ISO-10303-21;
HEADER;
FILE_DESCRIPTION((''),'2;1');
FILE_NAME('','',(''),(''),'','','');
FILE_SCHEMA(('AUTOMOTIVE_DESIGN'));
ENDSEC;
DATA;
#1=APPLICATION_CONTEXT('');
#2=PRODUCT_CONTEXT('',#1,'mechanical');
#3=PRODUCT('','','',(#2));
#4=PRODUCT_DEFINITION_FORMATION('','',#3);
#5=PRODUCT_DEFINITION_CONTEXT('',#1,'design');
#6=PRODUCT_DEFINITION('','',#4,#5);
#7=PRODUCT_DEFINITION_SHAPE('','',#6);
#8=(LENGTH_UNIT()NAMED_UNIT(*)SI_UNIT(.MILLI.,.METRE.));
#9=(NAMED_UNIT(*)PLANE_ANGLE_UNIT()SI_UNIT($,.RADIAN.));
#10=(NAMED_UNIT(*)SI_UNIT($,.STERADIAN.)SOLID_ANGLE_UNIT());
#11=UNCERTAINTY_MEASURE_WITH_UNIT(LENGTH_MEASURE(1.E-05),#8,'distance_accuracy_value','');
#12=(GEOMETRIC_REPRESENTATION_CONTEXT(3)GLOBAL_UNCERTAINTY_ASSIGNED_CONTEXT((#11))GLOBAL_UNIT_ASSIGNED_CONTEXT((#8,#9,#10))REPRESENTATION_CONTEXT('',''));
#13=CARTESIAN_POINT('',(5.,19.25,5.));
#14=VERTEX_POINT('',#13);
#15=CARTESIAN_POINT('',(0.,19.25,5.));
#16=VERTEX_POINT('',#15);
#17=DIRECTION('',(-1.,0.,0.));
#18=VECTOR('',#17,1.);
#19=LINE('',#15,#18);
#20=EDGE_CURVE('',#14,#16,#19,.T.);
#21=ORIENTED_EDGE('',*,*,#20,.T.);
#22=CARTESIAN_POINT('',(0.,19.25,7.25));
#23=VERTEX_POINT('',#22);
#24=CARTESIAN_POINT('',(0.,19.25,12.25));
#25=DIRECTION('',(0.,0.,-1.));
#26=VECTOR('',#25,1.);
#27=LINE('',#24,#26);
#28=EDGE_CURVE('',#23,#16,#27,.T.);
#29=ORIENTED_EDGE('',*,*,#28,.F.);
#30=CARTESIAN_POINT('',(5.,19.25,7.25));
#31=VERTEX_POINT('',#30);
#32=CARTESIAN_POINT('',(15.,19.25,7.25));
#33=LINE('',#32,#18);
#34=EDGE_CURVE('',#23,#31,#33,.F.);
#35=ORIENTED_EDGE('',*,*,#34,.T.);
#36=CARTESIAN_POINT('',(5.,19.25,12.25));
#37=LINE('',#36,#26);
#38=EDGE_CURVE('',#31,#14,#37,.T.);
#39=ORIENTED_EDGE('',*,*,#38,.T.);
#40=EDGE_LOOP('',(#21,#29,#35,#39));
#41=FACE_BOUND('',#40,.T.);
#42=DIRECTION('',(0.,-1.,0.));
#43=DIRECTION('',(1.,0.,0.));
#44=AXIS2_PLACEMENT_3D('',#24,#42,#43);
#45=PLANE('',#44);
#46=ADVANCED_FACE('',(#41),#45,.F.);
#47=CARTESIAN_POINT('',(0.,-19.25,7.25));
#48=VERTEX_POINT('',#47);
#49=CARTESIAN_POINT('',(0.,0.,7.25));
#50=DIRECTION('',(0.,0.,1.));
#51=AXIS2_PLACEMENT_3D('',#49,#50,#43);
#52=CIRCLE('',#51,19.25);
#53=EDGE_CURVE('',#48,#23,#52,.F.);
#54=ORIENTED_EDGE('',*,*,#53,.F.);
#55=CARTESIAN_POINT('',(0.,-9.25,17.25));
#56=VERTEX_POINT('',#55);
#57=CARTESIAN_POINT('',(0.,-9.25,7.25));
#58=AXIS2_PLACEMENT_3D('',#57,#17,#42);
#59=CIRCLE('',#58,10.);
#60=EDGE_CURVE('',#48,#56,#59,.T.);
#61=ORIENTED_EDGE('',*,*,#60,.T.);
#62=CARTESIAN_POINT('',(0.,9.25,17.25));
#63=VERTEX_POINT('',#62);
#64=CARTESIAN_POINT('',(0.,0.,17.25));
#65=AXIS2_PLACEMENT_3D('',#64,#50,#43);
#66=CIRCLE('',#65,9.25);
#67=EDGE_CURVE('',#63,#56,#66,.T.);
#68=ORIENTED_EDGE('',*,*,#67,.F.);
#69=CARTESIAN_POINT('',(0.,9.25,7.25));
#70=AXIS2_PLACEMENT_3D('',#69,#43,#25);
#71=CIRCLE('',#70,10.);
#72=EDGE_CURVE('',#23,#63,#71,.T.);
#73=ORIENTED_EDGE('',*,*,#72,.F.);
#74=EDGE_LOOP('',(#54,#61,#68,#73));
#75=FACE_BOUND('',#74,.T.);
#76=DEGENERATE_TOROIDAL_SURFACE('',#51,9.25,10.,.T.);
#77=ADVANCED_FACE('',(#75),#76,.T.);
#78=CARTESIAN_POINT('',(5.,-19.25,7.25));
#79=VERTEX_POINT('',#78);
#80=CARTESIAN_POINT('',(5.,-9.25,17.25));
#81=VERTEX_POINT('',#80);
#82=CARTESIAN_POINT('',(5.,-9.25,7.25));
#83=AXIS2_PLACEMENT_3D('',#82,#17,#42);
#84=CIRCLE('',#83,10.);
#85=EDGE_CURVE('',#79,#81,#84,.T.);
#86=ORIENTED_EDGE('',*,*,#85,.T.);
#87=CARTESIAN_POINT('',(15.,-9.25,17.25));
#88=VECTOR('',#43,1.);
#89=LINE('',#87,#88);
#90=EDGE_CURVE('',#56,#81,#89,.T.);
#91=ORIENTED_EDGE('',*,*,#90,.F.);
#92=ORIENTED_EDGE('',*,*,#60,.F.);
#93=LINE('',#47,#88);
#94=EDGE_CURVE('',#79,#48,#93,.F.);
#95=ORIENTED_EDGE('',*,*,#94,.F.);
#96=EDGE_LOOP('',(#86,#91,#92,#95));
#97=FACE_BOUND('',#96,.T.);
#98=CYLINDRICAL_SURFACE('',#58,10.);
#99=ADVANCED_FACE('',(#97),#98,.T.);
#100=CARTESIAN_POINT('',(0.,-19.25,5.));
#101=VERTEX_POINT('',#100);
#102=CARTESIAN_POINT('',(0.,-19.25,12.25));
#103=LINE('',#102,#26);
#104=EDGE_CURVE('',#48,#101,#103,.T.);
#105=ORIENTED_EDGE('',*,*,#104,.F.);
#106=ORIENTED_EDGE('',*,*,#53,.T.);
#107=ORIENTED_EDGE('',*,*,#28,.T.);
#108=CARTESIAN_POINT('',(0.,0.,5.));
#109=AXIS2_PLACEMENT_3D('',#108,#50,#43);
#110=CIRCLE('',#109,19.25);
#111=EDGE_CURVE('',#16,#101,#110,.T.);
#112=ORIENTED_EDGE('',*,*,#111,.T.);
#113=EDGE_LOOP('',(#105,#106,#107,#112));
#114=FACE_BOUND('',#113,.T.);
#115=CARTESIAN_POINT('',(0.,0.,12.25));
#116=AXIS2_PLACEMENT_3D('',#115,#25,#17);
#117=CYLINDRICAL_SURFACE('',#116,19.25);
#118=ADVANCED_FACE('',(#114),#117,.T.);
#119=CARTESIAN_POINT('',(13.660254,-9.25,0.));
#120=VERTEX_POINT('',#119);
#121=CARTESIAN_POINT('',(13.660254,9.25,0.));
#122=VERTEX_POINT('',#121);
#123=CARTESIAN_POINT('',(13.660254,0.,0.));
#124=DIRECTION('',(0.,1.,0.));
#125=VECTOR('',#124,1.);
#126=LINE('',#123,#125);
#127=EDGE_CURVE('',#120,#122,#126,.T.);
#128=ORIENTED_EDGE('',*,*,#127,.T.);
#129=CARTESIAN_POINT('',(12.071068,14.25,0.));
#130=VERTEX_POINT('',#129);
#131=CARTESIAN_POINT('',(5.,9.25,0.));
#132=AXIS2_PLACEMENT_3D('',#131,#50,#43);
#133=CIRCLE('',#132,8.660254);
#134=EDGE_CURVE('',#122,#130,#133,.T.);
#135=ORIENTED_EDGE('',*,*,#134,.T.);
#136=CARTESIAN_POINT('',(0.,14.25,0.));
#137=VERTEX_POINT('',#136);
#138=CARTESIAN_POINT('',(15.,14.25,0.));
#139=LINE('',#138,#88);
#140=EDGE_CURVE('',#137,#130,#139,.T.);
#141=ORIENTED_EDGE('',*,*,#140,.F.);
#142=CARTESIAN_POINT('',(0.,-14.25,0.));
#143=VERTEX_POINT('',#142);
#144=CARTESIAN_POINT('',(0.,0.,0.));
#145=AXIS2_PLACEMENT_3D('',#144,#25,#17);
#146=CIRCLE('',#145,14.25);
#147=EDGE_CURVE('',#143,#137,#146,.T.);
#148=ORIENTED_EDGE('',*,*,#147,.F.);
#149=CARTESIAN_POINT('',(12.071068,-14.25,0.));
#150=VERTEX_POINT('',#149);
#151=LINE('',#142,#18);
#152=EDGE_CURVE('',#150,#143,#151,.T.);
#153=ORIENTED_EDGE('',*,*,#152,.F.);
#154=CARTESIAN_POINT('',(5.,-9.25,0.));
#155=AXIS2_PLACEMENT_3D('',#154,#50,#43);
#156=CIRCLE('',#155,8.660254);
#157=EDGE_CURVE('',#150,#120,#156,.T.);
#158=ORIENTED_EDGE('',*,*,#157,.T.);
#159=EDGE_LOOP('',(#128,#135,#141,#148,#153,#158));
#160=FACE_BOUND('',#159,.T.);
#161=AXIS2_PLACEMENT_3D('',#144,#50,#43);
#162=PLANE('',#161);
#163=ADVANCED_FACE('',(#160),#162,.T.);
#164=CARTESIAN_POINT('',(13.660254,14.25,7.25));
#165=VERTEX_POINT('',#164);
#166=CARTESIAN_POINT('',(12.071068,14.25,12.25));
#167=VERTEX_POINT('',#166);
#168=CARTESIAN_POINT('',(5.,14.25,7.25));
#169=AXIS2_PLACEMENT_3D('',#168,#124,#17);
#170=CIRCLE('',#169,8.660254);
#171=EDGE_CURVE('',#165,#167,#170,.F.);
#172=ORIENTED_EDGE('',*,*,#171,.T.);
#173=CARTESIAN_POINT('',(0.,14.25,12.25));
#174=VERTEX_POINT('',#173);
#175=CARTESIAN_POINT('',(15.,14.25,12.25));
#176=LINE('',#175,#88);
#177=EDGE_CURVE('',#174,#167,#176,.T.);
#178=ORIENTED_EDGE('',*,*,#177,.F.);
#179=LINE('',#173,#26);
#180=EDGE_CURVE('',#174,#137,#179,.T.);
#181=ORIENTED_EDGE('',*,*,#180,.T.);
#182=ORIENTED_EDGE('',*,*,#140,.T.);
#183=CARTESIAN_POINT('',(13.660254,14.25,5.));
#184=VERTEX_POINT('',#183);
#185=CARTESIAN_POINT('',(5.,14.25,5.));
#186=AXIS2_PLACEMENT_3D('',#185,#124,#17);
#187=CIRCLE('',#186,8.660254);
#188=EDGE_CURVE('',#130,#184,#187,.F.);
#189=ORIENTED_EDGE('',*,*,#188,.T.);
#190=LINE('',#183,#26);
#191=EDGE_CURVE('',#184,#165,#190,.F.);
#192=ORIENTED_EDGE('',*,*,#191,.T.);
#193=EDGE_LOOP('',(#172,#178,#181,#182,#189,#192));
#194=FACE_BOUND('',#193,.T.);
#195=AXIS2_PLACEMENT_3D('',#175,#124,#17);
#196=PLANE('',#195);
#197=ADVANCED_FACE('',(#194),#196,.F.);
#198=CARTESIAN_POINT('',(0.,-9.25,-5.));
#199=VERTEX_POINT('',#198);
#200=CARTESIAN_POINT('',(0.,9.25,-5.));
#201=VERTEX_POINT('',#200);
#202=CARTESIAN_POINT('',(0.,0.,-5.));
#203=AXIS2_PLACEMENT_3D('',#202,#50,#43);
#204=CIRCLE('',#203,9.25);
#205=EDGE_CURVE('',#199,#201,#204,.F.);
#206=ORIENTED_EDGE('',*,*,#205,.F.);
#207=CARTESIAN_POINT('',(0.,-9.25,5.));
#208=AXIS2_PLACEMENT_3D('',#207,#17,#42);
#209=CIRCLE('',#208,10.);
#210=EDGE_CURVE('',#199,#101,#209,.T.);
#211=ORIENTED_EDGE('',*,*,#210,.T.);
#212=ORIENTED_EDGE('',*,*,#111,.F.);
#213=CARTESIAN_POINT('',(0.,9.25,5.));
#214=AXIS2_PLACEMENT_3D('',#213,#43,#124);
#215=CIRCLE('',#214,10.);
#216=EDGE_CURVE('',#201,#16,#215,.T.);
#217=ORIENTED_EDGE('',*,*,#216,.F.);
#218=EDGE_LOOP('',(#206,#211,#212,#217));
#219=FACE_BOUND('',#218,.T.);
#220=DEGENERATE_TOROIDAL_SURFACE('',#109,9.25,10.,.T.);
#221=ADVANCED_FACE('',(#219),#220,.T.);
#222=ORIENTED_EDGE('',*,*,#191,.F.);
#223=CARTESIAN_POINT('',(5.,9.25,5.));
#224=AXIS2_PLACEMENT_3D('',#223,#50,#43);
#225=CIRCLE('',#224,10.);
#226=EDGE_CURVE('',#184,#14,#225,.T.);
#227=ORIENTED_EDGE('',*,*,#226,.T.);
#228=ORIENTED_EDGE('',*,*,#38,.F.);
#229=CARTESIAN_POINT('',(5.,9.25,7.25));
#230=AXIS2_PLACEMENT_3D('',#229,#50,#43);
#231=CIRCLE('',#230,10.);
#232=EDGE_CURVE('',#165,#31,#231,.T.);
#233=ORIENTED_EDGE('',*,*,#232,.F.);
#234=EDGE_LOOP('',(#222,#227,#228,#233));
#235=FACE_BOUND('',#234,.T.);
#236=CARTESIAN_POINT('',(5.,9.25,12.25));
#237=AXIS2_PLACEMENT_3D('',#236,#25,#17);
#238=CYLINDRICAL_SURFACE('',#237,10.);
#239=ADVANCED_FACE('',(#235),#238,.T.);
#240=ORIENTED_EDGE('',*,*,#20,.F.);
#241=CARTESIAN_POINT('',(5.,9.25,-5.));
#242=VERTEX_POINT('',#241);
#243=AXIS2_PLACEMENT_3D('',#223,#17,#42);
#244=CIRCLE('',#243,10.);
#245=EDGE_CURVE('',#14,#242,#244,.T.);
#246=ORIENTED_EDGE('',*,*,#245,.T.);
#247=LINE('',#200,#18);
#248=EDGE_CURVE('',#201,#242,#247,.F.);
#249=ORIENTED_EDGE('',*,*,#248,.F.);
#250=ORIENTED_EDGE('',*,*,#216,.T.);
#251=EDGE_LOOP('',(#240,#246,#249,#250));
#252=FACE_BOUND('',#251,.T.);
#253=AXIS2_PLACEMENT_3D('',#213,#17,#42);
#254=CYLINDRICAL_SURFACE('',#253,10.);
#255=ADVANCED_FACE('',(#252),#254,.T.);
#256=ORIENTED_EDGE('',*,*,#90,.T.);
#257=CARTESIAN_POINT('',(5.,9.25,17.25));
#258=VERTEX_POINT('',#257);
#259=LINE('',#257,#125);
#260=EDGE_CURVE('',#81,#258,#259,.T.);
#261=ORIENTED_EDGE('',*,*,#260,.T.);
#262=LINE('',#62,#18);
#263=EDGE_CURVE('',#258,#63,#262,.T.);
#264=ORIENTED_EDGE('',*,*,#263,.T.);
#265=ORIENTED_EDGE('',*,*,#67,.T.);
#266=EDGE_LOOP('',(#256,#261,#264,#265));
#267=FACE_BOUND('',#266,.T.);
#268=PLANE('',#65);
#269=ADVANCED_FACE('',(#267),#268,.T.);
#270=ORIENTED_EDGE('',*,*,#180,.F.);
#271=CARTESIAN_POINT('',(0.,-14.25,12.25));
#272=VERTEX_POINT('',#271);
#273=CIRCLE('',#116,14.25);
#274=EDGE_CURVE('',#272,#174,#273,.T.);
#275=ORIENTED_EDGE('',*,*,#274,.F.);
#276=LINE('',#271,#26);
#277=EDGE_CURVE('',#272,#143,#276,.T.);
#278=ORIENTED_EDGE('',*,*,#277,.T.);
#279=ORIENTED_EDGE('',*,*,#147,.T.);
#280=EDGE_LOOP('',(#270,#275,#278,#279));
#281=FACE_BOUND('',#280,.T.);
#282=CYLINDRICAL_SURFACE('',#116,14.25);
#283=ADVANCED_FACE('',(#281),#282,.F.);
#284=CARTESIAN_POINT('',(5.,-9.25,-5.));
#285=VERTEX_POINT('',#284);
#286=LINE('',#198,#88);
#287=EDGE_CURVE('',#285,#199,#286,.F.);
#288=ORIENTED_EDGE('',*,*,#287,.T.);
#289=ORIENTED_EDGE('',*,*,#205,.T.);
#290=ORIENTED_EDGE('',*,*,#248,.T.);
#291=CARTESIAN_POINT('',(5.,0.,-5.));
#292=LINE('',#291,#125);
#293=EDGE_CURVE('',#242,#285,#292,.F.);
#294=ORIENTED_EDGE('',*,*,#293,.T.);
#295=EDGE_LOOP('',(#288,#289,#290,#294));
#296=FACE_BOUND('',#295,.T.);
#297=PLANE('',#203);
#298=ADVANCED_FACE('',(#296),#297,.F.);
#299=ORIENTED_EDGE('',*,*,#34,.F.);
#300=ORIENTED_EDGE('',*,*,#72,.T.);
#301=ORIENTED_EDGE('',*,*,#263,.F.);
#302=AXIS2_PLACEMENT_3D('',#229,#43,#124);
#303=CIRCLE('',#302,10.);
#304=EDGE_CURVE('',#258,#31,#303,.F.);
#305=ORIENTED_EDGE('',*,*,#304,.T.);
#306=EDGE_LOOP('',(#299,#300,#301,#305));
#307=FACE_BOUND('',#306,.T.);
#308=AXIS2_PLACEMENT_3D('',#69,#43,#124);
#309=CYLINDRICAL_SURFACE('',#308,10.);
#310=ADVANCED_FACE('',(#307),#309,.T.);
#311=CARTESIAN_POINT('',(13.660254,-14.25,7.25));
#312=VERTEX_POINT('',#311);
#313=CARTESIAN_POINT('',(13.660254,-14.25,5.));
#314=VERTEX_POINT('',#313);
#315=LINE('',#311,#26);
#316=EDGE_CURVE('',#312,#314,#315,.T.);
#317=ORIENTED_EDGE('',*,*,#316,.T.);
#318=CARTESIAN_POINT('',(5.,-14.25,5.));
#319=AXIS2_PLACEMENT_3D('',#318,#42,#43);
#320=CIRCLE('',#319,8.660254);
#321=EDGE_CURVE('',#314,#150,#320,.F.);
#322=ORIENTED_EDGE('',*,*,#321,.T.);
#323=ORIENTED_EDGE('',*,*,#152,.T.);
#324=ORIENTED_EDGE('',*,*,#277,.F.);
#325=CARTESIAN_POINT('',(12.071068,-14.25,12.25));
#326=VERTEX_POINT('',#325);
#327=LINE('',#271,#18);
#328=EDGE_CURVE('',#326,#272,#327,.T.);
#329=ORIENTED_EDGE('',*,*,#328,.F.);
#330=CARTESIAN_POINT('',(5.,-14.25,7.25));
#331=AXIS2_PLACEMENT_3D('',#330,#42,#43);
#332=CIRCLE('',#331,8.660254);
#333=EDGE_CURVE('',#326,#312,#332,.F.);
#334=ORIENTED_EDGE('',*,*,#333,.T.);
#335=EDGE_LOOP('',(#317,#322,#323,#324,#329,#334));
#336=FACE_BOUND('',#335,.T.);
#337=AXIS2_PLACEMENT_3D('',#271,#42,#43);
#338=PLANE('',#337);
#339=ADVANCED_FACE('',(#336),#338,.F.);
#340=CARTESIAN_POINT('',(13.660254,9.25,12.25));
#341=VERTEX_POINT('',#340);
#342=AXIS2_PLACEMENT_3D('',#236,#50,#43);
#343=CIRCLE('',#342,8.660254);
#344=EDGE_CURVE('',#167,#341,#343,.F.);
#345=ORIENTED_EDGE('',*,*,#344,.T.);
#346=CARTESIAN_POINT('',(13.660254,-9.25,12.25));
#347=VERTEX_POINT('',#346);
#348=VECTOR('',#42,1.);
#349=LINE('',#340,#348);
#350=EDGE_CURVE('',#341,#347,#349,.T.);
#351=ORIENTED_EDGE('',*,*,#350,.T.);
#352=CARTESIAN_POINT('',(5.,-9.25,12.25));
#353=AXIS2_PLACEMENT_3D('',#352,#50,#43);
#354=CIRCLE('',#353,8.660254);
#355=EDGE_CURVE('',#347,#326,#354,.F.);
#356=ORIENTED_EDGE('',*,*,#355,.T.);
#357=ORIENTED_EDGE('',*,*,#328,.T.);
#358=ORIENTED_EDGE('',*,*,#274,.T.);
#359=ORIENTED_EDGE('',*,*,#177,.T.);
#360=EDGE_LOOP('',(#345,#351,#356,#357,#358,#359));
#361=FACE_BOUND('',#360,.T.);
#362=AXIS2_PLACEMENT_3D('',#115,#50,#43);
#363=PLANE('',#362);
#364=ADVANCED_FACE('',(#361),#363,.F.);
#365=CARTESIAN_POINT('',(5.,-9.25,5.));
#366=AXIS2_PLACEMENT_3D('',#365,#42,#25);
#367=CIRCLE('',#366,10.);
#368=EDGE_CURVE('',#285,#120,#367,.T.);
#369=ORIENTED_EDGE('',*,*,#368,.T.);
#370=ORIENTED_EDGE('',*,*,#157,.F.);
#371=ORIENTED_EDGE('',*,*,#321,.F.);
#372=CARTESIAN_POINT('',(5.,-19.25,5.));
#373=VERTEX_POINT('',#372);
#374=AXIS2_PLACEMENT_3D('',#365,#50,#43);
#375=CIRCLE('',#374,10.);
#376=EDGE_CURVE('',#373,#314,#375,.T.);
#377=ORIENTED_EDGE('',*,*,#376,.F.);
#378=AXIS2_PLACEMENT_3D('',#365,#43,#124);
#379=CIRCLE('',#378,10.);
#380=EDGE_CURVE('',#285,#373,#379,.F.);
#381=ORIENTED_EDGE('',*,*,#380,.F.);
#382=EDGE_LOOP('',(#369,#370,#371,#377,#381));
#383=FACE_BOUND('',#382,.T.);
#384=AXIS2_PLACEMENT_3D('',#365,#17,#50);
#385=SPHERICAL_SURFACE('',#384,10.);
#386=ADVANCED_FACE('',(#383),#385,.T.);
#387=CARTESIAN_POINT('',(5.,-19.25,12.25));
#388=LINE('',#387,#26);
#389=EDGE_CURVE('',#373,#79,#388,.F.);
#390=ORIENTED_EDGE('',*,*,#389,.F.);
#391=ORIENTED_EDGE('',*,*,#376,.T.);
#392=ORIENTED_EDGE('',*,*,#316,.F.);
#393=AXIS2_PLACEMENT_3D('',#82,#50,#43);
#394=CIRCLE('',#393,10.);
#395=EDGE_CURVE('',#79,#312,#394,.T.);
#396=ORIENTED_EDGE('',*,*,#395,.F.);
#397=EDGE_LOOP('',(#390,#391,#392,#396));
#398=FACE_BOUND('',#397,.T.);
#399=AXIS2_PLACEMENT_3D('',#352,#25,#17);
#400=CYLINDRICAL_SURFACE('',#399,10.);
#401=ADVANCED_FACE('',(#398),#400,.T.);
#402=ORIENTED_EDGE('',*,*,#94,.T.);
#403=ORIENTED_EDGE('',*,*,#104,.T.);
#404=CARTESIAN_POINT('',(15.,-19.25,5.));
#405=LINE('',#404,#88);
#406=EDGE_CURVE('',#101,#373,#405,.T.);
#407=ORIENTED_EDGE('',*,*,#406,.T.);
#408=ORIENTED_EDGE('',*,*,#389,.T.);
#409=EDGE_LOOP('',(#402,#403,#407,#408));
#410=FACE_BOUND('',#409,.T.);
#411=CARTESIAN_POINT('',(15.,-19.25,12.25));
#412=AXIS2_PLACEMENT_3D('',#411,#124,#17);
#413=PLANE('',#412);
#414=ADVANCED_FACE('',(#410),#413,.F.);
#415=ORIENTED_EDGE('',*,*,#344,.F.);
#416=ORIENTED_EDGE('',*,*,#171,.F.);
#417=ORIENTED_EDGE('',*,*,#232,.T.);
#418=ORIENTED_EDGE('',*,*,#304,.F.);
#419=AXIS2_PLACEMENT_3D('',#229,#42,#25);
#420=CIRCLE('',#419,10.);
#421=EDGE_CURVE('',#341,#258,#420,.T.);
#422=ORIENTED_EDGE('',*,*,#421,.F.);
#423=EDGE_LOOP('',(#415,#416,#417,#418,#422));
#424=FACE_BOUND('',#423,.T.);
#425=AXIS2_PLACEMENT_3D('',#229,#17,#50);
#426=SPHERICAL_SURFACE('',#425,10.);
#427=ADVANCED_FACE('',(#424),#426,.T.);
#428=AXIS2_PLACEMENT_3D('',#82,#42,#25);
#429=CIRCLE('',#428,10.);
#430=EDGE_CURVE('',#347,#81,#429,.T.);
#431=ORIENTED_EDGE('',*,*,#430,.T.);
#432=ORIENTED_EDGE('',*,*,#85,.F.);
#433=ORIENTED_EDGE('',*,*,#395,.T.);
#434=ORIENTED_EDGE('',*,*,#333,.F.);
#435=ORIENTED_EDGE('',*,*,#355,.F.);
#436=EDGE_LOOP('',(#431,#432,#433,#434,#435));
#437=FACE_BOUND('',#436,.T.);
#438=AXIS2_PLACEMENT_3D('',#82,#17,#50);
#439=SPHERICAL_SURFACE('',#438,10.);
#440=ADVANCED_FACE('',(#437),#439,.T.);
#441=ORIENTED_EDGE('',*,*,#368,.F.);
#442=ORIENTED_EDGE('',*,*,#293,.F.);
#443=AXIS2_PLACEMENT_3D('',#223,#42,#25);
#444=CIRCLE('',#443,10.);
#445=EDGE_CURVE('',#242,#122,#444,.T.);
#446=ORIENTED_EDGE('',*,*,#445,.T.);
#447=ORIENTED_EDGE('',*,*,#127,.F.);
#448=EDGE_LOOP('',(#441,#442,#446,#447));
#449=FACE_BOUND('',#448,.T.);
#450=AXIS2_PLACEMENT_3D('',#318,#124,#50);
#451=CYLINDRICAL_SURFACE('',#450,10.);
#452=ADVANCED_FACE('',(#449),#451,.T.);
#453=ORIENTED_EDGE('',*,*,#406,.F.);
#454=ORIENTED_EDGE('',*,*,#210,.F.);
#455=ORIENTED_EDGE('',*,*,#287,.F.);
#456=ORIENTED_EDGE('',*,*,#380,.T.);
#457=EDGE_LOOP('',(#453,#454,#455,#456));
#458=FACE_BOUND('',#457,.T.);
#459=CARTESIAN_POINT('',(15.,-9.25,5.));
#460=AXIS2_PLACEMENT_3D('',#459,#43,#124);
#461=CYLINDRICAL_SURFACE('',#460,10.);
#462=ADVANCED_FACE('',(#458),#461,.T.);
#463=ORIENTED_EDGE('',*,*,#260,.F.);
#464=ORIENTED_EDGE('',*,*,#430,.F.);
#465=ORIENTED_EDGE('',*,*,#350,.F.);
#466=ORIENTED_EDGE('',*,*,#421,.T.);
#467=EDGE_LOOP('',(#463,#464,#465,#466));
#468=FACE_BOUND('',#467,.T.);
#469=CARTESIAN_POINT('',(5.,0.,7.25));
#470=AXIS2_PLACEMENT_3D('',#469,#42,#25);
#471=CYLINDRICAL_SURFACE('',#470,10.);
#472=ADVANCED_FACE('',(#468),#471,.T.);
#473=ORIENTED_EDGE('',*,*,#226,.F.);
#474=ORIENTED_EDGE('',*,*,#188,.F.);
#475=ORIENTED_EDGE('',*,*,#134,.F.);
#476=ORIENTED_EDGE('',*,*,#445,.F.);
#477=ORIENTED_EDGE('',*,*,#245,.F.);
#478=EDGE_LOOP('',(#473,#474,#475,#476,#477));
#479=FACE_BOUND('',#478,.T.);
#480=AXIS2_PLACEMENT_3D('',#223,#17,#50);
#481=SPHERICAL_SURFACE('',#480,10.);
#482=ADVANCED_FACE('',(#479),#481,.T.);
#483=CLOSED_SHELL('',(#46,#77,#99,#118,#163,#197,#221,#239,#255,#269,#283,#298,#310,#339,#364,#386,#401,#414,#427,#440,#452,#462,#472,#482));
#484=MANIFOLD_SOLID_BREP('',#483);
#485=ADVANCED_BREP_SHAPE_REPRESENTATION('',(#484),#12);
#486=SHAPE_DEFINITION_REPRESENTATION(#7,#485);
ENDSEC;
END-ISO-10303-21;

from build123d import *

# Parameters (mm, degrees)
BOSS_EXTRUDE1_DEPTH = 12.25
BOSS_EXTRUDE2_DEPTH = 5
LPATTERN1_COUNT     = 2
LPATTERN1_PITCH     = 17.25
FILLET11_R          = 10
FILLET12_R          = 10


with BuildPart() as part:
    # Sketch1 → Boss-Extrude1 (new body)
    with BuildSketch(Plane.XY):
        with BuildLine():
            Line((0, 19.25), (15, 19.25))
            Line((15, 19.25), (15, 14.25))
            Line((15, 14.25), (0, 14.25))
            ThreePointArc((0, 14.25), (-14.25, 0), (0, -14.25))
            Line((0, -14.25), (15, -14.25))
            Line((15, -14.25), (15, -19.25))
            Line((15, -19.25), (0, -19.25))
            ThreePointArc((0, -19.25), (-19.25, 0), (0, 19.25))
        make_face()
    extrude(amount=BOSS_EXTRUDE1_DEPTH)

    # Sketch2 → Boss-Extrude2 (add)
    with BuildSketch(Plane.XY.offset(12.25)):
        with BuildLine():
            Line((0, 19.25), (15, 19.25))
            Line((15, 19.25), (15, 14.25))
            Line((15, 14.25), (15, -14.25))
            Line((15, -14.25), (15, -19.25))
            Line((15, -19.25), (0, -19.25))
            ThreePointArc((0, -19.25), (-19.25, 0), (0, 19.25))
        make_face()
    boss_extrude2 = extrude(amount=BOSS_EXTRUDE2_DEPTH)

    # LPattern1: Boss-Extrude2 ×2
    with Locations(*[(0, 0, -i * LPATTERN1_PITCH) for i in range(1, LPATTERN1_COUNT)]):
        add(boss_extrude2)

    # Fillet11
    fillet11_edges = [part.edges().sort_by_distance(p)[0] for p in [
        (-19.25, 0, 17.25),
        (7.5, -19.25, 17.25),
        (7.5, 19.25, 17.25),
        (-19.25, 0, -5),
        (7.5, -19.25, -5),
        (7.5, 19.25, -5),
    ]]
    fillet(fillet11_edges, radius=FILLET11_R)

    # Fillet12
    # the kernel refuses this fillet: 10 mm, written as the material it takes off along each edge
    with BuildSketch(Plane(origin=(15, -9.25, 7.25), x_dir=(0, -1, 0), z_dir=(0, 0, -1))) as fillet12_piece_1:
        with BuildLine():
            CenterArc((10 - FILLET12_R, FILLET12_R), FILLET12_R, 270, 90)
            Line((10, FILLET12_R), (10, 0))
            Line((10, 0), (10 - FILLET12_R, 0))
        make_face()
    revolve(axis=Axis((15, -9.25, 7.25), (-1, 0, 0)), revolution_arc=90, mode=Mode.SUBTRACT)
    with BuildSketch(Plane(origin=(15, 9.25, 17.25), x_dir=(0, 0, -1), z_dir=(0, -1, 0)), Plane(origin=(15, -9.25, -5), x_dir=(0, 0, 1), z_dir=(0, 1, 0))) as fillet12_piece_2:
        with BuildLine():
            CenterArc((FILLET12_R, -FILLET12_R), FILLET12_R, 90, 90)
            Line((0, -FILLET12_R), (0, 0))
            Line((0, 0), (FILLET12_R, 0))
        make_face()
    extrude(amount=18.5, mode=Mode.SUBTRACT)
    with BuildSketch(Plane(origin=(15, 9.25, 7.25), x_dir=(0, 1, 0), z_dir=(0, 0, -1))) as fillet12_piece_3:
        with BuildLine():
            CenterArc((10 - FILLET12_R, -FILLET12_R), FILLET12_R, 360, 90)
            Line((10, -FILLET12_R), (10, 0))
            Line((10, 0), (10 - FILLET12_R, 0))
        make_face()
    revolve(axis=Axis((15, 9.25, 7.25), (1, 0, 0)), revolution_arc=90, mode=Mode.SUBTRACT)
    with BuildSketch(Plane(origin=(15, 19.25, 7.25), x_dir=(-1, 0, 0), z_dir=(0, 0, -1)), Plane(origin=(15, -19.25, 7.25), x_dir=(0, 1, 0), z_dir=(0, 0, -1))) as fillet12_piece_4:
        with BuildLine():
            CenterArc((FILLET12_R, -FILLET12_R), FILLET12_R, 90, 90)
            Line((0, -FILLET12_R), (0, 0))
            Line((0, 0), (FILLET12_R, 0))
        make_face()
    extrude(amount=2.25, mode=Mode.SUBTRACT)
    with BuildSketch(Plane(origin=(15, 9.25, 5), x_dir=(0, 1, 0), z_dir=(0, 0, 1))) as fillet12_piece_5:
        with BuildLine():
            CenterArc((10 - FILLET12_R, FILLET12_R), FILLET12_R, 270, 90)
            Line((10, FILLET12_R), (10, 0))
            Line((10, 0), (10 - FILLET12_R, 0))
        make_face()
    revolve(axis=Axis((15, 9.25, 5), (-1, 0, 0)), revolution_arc=90, mode=Mode.SUBTRACT)
    with BuildSketch(Plane(origin=(15, -9.25, 5), x_dir=(0, -1, 0), z_dir=(0, 0, 1))) as fillet12_piece_6:
        with BuildLine():
            CenterArc((10 - FILLET12_R, -FILLET12_R), FILLET12_R, 360, 90)
            Line((10, -FILLET12_R), (10, 0))
            Line((10, 0), (10 - FILLET12_R, 0))
        make_face()
    revolve(axis=Axis((15, -9.25, 5), (1, 0, 0)), revolution_arc=90, mode=Mode.SUBTRACT)


solid = part.part
